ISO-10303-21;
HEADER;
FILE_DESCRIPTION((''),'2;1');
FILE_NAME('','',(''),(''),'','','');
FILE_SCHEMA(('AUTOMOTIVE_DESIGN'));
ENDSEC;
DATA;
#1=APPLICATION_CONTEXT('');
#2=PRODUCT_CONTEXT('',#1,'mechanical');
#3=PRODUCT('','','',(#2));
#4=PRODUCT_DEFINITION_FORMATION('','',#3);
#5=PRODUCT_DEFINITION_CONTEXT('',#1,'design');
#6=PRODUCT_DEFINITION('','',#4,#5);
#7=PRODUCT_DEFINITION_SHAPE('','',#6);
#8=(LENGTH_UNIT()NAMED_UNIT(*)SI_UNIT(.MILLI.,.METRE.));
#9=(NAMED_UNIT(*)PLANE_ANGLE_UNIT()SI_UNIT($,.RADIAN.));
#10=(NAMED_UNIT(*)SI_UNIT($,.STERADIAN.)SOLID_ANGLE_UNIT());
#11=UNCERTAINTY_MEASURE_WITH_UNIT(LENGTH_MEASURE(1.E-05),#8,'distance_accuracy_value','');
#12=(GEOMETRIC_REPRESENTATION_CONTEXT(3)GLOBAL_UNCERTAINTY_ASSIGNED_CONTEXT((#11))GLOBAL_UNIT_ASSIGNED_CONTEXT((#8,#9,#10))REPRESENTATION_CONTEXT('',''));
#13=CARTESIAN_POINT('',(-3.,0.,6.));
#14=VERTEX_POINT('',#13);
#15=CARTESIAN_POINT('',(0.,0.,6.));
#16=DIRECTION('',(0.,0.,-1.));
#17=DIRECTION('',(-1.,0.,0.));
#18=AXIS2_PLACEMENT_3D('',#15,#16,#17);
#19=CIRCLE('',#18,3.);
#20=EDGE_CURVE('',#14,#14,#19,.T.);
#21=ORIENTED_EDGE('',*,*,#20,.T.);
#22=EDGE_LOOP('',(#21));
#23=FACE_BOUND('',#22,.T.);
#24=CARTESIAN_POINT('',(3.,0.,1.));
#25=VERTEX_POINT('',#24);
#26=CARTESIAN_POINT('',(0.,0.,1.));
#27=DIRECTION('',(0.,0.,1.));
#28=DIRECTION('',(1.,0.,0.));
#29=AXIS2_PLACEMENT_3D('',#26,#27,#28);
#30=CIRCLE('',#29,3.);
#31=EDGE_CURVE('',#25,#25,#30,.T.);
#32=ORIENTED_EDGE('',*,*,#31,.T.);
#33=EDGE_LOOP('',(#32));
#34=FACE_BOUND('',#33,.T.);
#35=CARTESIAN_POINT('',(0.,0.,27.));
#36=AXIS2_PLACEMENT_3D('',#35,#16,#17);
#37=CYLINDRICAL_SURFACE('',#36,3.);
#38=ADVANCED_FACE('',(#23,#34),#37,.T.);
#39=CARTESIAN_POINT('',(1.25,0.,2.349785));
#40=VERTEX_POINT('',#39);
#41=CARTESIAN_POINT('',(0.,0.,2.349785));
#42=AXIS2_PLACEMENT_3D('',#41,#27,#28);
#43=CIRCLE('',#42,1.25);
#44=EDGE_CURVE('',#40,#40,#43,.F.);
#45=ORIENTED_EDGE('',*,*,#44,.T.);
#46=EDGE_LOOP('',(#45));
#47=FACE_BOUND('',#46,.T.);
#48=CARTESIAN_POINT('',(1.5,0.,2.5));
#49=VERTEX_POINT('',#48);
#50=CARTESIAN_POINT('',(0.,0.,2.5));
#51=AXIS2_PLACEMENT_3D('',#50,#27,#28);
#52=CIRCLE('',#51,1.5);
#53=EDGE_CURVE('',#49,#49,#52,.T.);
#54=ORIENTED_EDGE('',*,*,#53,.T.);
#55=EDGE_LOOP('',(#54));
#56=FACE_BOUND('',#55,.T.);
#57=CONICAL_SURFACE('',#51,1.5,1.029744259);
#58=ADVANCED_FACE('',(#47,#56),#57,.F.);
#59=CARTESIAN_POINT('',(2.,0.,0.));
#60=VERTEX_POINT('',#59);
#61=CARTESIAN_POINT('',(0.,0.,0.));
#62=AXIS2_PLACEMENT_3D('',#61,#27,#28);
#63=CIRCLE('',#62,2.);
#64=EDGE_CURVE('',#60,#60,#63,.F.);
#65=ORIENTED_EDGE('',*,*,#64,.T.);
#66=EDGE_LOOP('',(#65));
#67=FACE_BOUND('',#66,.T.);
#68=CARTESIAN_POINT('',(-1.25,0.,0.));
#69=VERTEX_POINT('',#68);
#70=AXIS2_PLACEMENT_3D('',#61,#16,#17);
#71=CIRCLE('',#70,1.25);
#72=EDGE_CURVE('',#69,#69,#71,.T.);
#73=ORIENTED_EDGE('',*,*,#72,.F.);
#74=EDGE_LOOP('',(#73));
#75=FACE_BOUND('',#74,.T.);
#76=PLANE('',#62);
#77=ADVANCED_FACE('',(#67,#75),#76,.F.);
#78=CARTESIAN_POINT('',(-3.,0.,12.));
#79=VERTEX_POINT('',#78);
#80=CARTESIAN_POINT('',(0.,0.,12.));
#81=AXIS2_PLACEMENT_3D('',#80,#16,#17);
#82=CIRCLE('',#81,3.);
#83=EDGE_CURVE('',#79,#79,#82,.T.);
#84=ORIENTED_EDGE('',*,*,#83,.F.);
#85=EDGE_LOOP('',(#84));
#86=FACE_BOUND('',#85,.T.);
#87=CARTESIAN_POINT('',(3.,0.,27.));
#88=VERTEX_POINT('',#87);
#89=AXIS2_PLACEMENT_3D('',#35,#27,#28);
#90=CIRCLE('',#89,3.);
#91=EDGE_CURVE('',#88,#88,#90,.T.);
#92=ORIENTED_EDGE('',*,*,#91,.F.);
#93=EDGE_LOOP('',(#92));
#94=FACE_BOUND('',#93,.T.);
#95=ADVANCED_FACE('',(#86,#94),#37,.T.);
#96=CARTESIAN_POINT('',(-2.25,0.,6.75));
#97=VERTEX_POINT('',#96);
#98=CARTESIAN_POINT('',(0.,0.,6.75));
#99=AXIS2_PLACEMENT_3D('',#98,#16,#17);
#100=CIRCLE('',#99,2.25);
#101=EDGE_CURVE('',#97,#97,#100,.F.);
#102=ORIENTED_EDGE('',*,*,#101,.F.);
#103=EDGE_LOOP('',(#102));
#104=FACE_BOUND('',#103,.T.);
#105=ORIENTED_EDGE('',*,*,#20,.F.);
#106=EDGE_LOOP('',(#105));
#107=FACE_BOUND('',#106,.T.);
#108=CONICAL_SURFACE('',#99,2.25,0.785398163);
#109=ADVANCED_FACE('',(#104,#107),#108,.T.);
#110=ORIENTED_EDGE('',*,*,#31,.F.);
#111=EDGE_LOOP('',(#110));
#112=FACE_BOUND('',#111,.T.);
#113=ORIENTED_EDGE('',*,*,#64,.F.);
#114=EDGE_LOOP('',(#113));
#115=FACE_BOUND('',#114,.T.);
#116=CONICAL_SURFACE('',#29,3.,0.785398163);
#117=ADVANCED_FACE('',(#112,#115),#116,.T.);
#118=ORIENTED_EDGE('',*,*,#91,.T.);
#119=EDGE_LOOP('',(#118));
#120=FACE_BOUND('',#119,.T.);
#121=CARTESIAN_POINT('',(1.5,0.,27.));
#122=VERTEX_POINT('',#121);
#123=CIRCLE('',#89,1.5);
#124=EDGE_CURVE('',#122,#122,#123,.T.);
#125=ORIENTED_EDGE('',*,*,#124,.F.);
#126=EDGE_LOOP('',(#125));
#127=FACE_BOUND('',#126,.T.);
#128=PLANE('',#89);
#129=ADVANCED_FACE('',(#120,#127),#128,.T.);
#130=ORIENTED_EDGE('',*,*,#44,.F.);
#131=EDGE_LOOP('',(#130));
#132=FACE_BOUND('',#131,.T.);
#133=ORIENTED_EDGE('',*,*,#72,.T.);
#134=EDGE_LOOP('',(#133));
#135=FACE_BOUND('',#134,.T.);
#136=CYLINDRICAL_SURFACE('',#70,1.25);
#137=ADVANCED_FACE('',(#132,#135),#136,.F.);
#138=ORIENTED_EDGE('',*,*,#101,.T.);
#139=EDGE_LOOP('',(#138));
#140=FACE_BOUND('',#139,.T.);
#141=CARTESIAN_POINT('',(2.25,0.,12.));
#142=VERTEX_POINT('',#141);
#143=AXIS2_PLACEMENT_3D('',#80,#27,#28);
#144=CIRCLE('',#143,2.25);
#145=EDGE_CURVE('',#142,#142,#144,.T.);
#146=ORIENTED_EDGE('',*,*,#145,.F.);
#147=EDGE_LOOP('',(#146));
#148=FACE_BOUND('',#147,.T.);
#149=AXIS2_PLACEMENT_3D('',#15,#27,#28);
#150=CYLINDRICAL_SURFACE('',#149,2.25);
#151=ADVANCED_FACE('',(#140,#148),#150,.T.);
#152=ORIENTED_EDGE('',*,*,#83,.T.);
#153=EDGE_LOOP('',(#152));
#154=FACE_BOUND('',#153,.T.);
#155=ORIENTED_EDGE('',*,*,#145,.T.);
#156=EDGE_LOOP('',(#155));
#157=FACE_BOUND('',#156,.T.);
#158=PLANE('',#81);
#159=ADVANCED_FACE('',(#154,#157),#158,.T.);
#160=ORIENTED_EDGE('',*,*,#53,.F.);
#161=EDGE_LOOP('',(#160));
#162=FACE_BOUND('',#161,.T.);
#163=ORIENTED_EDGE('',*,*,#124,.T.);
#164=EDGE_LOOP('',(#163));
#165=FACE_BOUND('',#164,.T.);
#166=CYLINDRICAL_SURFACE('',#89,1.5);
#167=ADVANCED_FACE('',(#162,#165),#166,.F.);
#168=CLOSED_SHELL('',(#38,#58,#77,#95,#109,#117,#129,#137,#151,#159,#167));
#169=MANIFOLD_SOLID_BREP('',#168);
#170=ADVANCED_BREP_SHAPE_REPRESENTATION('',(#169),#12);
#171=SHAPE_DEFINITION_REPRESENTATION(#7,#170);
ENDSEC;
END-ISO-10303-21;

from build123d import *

# Parameters (mm, degrees)
ESQUISSE1_R                         = 3
BOSS_EXTRU_1_DEPTH                  = 27
DIAM_TRE_DU_PER_AGE_3_0_3_1_D       = 3
DIAM_TRE_DU_PER_AGE_3_0_3_1_DEPTH   = 24.5
DIAM_TRE_DU_PER_AGE_3_0_3_1_TIP     = 0.901290929
DIAM_TRE_DU_PER_AGE_2_5_2_5_1_D     = 2.5
DIAM_TRE_DU_PER_AGE_2_5_2_5_1_DEPTH = 3
DIAM_TRE_DU_PER_AGE_2_5_2_5_1_TIP   = 0.751075774
ENL_V_START                         = -15
ESQUISSE6_W                         = 11.750178357
ESQUISSE6_H                         = 11.384595502
ESQUISSE6_R                         = 2.25
ENL_V_MAT_EXTRU_1_DEPTH             = 6
CHANFREIN1_SIZE                     = 1
CHANFREIN2_SIZE                     = 0.75


with BuildPart() as part:
    # Esquisse1 → Boss.-Extru.1 (new body)
    with BuildSketch(Plane.XY):
        Circle(ESQUISSE1_R)
    extrude(amount=BOSS_EXTRU_1_DEPTH)

    # Diamètre du perçage Ø3.0 (3)1
    with Locations(Plane.XY.offset(27)):
        with Locations((0, 0)):
            Hole(DIAM_TRE_DU_PER_AGE_3_0_3_1_D / 2, depth=DIAM_TRE_DU_PER_AGE_3_0_3_1_DEPTH)
            with Locations((0, 0, -(DIAM_TRE_DU_PER_AGE_3_0_3_1_DEPTH + DIAM_TRE_DU_PER_AGE_3_0_3_1_TIP / 2))):  # 118° drill point
                Cone(0, DIAM_TRE_DU_PER_AGE_3_0_3_1_D / 2, DIAM_TRE_DU_PER_AGE_3_0_3_1_TIP, mode=Mode.SUBTRACT)

    # Diamètre du perçage Ø2.5 (2.5)1
    with Locations(Plane(origin=(0, 0, 0), x_dir=(-1, 0, 0), z_dir=(0, 0, -1))):
        with Locations((0, 0)):
            Hole(DIAM_TRE_DU_PER_AGE_2_5_2_5_1_D / 2, depth=DIAM_TRE_DU_PER_AGE_2_5_2_5_1_DEPTH)
            with Locations((0, 0, -(DIAM_TRE_DU_PER_AGE_2_5_2_5_1_DEPTH + DIAM_TRE_DU_PER_AGE_2_5_2_5_1_TIP / 2))):  # 118° drill point
                Cone(0, DIAM_TRE_DU_PER_AGE_2_5_2_5_1_D / 2, DIAM_TRE_DU_PER_AGE_2_5_2_5_1_TIP, mode=Mode.SUBTRACT)

    # Esquisse6 → Enlèv. mat.-Extru.1 (cut)
    with BuildSketch(Plane.XY.offset(27).offset(ENL_V_START)):
        with Locations((-0.219764127, 0.428836611)):
            Rectangle(ESQUISSE6_W, ESQUISSE6_H)
        Circle(ESQUISSE6_R, mode=Mode.SUBTRACT)
    extrude(amount=-ENL_V_MAT_EXTRU_1_DEPTH, mode=Mode.SUBTRACT)

    # Chanfrein1
    chanfrein1_edges = [part.edges().sort_by_distance(p)[0] for p in [
        (-3, 0, 0),
    ]]
    chamfer(chanfrein1_edges, length=CHANFREIN1_SIZE)

    # Chanfrein2
    chanfrein2_edges = [part.edges().sort_by_distance(p)[0] for p in [
        (-2.25, 0, 6),
    ]]
    chamfer(chanfrein2_edges, length=CHANFREIN2_SIZE - 0.0001)  # a hair under: the kernel refuses the full size


solid = part.part
